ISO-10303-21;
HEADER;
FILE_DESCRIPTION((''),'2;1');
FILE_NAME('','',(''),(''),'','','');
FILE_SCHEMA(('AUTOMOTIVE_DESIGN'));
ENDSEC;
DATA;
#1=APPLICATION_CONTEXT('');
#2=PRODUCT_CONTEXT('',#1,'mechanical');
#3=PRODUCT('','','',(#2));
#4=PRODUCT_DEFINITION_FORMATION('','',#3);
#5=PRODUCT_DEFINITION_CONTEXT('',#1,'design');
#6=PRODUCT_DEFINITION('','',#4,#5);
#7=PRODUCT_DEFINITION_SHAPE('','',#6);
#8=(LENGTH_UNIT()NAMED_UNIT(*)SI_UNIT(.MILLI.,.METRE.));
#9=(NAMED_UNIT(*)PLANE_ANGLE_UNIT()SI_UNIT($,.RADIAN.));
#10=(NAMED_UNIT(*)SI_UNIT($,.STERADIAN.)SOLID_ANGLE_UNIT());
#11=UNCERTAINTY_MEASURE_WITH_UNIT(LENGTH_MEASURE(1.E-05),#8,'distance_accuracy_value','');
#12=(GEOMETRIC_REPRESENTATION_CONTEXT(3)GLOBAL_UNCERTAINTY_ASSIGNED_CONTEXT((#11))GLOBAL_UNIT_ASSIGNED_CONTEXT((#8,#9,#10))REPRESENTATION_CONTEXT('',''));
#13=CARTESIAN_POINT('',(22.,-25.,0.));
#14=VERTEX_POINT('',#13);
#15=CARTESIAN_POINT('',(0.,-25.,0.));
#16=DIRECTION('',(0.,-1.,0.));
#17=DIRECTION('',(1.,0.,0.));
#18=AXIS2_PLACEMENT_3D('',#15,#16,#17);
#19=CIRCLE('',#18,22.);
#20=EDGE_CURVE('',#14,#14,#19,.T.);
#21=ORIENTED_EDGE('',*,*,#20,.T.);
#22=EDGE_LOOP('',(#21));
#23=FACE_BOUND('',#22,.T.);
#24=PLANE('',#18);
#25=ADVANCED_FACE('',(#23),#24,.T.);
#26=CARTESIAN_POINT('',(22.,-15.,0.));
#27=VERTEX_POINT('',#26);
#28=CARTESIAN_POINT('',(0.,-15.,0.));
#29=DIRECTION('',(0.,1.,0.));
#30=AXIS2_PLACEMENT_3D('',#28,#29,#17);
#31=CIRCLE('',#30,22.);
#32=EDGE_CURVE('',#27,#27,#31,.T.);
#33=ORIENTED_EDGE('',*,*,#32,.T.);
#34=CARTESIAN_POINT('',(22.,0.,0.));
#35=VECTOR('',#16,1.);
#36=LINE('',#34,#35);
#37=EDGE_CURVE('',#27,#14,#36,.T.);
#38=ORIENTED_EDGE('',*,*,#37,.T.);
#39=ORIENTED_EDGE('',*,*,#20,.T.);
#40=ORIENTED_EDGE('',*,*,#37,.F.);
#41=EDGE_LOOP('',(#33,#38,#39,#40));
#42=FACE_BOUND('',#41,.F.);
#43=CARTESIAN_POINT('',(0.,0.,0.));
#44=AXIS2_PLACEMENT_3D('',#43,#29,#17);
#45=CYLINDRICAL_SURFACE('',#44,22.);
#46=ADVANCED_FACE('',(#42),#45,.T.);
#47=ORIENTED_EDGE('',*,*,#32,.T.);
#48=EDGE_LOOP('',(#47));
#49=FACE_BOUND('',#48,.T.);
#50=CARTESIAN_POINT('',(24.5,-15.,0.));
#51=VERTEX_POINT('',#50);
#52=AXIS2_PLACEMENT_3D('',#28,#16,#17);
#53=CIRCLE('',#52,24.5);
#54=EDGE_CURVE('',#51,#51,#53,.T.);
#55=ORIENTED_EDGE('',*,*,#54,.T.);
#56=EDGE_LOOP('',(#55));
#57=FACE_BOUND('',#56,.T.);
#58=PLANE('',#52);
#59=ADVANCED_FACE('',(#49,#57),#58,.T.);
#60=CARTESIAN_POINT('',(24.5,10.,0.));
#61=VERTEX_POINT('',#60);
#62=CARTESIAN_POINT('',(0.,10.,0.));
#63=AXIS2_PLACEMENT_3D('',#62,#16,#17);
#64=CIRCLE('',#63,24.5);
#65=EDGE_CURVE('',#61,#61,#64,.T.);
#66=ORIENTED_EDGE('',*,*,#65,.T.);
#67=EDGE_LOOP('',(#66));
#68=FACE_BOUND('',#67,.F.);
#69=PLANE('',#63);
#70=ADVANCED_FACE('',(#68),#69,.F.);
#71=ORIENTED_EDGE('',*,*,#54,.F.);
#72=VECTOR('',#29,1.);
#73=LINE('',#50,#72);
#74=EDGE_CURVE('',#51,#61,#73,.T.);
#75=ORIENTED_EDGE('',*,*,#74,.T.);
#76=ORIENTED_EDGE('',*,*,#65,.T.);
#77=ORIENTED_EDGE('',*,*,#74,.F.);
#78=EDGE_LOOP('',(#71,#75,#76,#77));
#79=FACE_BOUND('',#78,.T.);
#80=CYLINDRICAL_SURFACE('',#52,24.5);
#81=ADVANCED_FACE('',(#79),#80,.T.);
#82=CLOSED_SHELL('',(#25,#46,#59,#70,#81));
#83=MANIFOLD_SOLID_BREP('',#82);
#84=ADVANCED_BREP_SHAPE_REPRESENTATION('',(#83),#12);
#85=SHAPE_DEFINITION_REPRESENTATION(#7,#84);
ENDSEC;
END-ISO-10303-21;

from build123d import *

# Parameters (mm, degrees)
F0_R     = 22
F2_DEPTH = 25
F3_DEPTH = 25
F4_R     = 24.5
F5_DEPTH = 25


with BuildPart() as f2:
    # F0 (on Front) → F2 (new body)
    with BuildSketch(Plane.XZ):
        Circle(F0_R)
        with BuildLine():
            ThreePointArc((-19.401899791, 1.9535312895), (-13.921825835, 13.654038429), (-2.3299484959, 19.3603032003))
            ThreePointArc((-2.3299484959, 19.3603032003), (0, 19.5), (2.3299484959, 19.3603032003))
            ThreePointArc((2.3299484959, 19.3603032003), (13.921825835, 13.654038429), (19.401899791, 1.9535312895))
            ThreePointArc((19.401899791, 1.9535312895), (19.4754595058, 0.9779964404), (19.5, 0))
            ThreePointArc((19.5, 0), (19.4754595058, -0.9779964404), (19.401899791, -1.9535312895))
            ThreePointArc((19.401899791, -1.9535312895), (13.921825835, -13.654038429), (2.3299484959, -19.3603032003))
            ThreePointArc((2.3299484959, -19.3603032003), (0, -19.5), (-2.3299484959, -19.3603032003))
            ThreePointArc((-2.3299484959, -19.3603032003), (-13.921825835, -13.654038429), (-19.401899791, -1.9535312895))
            ThreePointArc((-19.401899791, -1.9535312895), (-19.5, 0), (-19.401899791, 1.9535312895))
        make_face(mode=Mode.SUBTRACT)
    extrude(amount=F2_DEPTH)



with BuildPart() as f2b:
    # F0 (on Front) → F2, piece 2 (new body)
    with BuildSketch(Plane.XZ):
        with BuildLine():
            ThreePointArc((-2.8938206378, 1.9535312895), (-1.7519205381, 1.9616594322), (-1.1833040417, 2.9519508966))
            ThreePointArc((-1.1833040417, 2.9519508966), (-1.5191484267, 3.7627509657), (-2.3299484959, 4.0985953507))
            ThreePointArc((-2.3299484959, 4.0985953507), (-3.4389177943, 3.2434652177), (-2.8938206378, 1.9535312895))
        make_face()
    extrude(amount=F2_DEPTH)


with BuildPart() as f2_1:
    add(f2.part)

    add(f2b.part)  # F3 merges F2b
    # F0 (on Front) → F3 (join)
    with BuildSketch(Plane.XZ):
        with BuildLine():
            ThreePointArc((-2.8938206378, 1.9535312895), (-3.4389177943, 3.2434652177), (-2.3299484959, 4.0985953507))
            Line((-2.3299484959, 4.0985953507), (-2.3299484959, 19.3603032003))
            ThreePointArc((-2.3299484959, 19.3603032003), (-13.921825835, 13.654038429), (-19.401899791, 1.9535312895))
            Line((-19.401899791, 1.9535312895), (-2.8938206378, 1.9535312895))
        make_face()
        with BuildLine():
            ThreePointArc((19.401899791, 1.9535312895), (13.921825835, 13.654038429), (2.3299484959, 19.3603032003))
            Line((2.3299484959, 19.3603032003), (2.3299484959, 4.0985953507))
            ThreePointArc((2.3299484959, 4.0985953507), (3.140748565, 3.7627509657), (3.47659295, 2.9519508966))
            ThreePointArc((3.47659295, 2.9519508966), (3.3202399602, 2.3739229388), (2.8938206378, 1.9535312895))
            Line((2.8938206378, 1.9535312895), (19.401899791, 1.9535312895))
        make_face()
        with BuildLine():
            ThreePointArc((-2.3299484959, 4.0985953507), (-1.5191484267, 3.7627509657), (-1.1833040417, 2.9519508966))
            ThreePointArc((-1.1833040417, 2.9519508966), (-1.7519205381, 1.9616594322), (-2.8938206378, 1.9535312895))
            Line((-2.8938206378, 1.9535312895), (-19.401899791, 1.9535312895))
            ThreePointArc((-19.401899791, 1.9535312895), (-19.5, 0), (-19.401899791, -1.9535312895))
            Line((-19.401899791, -1.9535312895), (-2.8938206378, -1.9535312895))
            ThreePointArc((-2.8938206378, -1.9535312895), (-1.7519205381, -1.9616594322), (-1.1833040417, -2.9519508966))
            ThreePointArc((-1.1833040417, -2.9519508966), (-1.5191484267, -3.7627509657), (-2.3299484959, -4.0985953507))
            Line((-2.3299484959, -4.0985953507), (-2.3299484959, -19.3603032003))
            ThreePointArc((-2.3299484959, -19.3603032003), (0, -19.5), (2.3299484959, -19.3603032003))
            Line((2.3299484959, -19.3603032003), (2.3299484959, -4.0985953507))
            ThreePointArc((2.3299484959, -4.0985953507), (1.2209791974, -2.6604365754), (2.8938206378, -1.9535312895))
            Line((2.8938206378, -1.9535312895), (19.401899791, -1.9535312895))
            ThreePointArc((19.401899791, -1.9535312895), (19.4754595058, -0.9779964404), (19.5, 0))
            ThreePointArc((19.5, 0), (19.4754595058, 0.9779964404), (19.401899791, 1.9535312895))
            Line((19.401899791, 1.9535312895), (2.8938206378, 1.9535312895))
            ThreePointArc((2.8938206378, 1.9535312895), (1.2209791974, 2.6604365754), (2.3299484959, 4.0985953507))
            Line((2.3299484959, 4.0985953507), (2.3299484959, 19.3603032003))
            ThreePointArc((2.3299484959, 19.3603032003), (0, 19.5), (-2.3299484959, 19.3603032003))
            Line((-2.3299484959, 19.3603032003), (-2.3299484959, 4.0985953507))
        make_face()
        with BuildLine():
            Line((-2.8938206378, -1.9535312895), (-19.401899791, -1.9535312895))
            ThreePointArc((-19.401899791, -1.9535312895), (-13.921825835, -13.654038429), (-2.3299484959, -19.3603032003))
            Line((-2.3299484959, -19.3603032003), (-2.3299484959, -4.0985953507))
            ThreePointArc((-2.3299484959, -4.0985953507), (-3.4389177943, -3.2434652177), (-2.8938206378, -1.9535312895))
        make_face()
        with BuildLine():
            Line((2.3299484959, -4.0985953507), (2.3299484959, -19.3603032003))
            ThreePointArc((2.3299484959, -19.3603032003), (13.921825835, -13.654038429), (19.401899791, -1.9535312895))
            Line((19.401899791, -1.9535312895), (2.8938206378, -1.9535312895))
            ThreePointArc((2.8938206378, -1.9535312895), (3.3202399602, -2.3739229388), (3.47659295, -2.9519508966))
            ThreePointArc((3.47659295, -2.9519508966), (3.140748565, -3.7627509657), (2.3299484959, -4.0985953507))
        make_face()
        with BuildLine():
            ThreePointArc((2.8938206378, -1.9535312895), (1.2209791974, -2.6604365754), (2.3299484959, -4.0985953507))
            ThreePointArc((2.3299484959, -4.0985953507), (3.140748565, -3.7627509657), (3.47659295, -2.9519508966))
            ThreePointArc((3.47659295, -2.9519508966), (3.3202399602, -2.3739229388), (2.8938206378, -1.9535312895))
        make_face()
        with BuildLine():
            ThreePointArc((3.47659295, 2.9519508966), (3.140748565, 3.7627509657), (2.3299484959, 4.0985953507))
            ThreePointArc((2.3299484959, 4.0985953507), (1.2209791974, 2.6604365754), (2.8938206378, 1.9535312895))
            ThreePointArc((2.8938206378, 1.9535312895), (3.3202399602, 2.3739229388), (3.47659295, 2.9519508966))
        make_face()
        with BuildLine():
            ThreePointArc((-1.1833040417, -2.9519508966), (-1.7519205381, -1.9616594322), (-2.8938206378, -1.9535312895))
            ThreePointArc((-2.8938206378, -1.9535312895), (-3.4389177943, -3.2434652177), (-2.3299484959, -4.0985953507))
            ThreePointArc((-2.3299484959, -4.0985953507), (-1.5191484267, -3.7627509657), (-1.1833040417, -2.9519508966))
        make_face()
    extrude(amount=F3_DEPTH)

    # F4 (on offset) → F5 (join)
    with BuildSketch(Plane.XZ.offset(15)):
        Circle(F4_R)
    extrude(amount=-F5_DEPTH)


solid = f2_1.part
